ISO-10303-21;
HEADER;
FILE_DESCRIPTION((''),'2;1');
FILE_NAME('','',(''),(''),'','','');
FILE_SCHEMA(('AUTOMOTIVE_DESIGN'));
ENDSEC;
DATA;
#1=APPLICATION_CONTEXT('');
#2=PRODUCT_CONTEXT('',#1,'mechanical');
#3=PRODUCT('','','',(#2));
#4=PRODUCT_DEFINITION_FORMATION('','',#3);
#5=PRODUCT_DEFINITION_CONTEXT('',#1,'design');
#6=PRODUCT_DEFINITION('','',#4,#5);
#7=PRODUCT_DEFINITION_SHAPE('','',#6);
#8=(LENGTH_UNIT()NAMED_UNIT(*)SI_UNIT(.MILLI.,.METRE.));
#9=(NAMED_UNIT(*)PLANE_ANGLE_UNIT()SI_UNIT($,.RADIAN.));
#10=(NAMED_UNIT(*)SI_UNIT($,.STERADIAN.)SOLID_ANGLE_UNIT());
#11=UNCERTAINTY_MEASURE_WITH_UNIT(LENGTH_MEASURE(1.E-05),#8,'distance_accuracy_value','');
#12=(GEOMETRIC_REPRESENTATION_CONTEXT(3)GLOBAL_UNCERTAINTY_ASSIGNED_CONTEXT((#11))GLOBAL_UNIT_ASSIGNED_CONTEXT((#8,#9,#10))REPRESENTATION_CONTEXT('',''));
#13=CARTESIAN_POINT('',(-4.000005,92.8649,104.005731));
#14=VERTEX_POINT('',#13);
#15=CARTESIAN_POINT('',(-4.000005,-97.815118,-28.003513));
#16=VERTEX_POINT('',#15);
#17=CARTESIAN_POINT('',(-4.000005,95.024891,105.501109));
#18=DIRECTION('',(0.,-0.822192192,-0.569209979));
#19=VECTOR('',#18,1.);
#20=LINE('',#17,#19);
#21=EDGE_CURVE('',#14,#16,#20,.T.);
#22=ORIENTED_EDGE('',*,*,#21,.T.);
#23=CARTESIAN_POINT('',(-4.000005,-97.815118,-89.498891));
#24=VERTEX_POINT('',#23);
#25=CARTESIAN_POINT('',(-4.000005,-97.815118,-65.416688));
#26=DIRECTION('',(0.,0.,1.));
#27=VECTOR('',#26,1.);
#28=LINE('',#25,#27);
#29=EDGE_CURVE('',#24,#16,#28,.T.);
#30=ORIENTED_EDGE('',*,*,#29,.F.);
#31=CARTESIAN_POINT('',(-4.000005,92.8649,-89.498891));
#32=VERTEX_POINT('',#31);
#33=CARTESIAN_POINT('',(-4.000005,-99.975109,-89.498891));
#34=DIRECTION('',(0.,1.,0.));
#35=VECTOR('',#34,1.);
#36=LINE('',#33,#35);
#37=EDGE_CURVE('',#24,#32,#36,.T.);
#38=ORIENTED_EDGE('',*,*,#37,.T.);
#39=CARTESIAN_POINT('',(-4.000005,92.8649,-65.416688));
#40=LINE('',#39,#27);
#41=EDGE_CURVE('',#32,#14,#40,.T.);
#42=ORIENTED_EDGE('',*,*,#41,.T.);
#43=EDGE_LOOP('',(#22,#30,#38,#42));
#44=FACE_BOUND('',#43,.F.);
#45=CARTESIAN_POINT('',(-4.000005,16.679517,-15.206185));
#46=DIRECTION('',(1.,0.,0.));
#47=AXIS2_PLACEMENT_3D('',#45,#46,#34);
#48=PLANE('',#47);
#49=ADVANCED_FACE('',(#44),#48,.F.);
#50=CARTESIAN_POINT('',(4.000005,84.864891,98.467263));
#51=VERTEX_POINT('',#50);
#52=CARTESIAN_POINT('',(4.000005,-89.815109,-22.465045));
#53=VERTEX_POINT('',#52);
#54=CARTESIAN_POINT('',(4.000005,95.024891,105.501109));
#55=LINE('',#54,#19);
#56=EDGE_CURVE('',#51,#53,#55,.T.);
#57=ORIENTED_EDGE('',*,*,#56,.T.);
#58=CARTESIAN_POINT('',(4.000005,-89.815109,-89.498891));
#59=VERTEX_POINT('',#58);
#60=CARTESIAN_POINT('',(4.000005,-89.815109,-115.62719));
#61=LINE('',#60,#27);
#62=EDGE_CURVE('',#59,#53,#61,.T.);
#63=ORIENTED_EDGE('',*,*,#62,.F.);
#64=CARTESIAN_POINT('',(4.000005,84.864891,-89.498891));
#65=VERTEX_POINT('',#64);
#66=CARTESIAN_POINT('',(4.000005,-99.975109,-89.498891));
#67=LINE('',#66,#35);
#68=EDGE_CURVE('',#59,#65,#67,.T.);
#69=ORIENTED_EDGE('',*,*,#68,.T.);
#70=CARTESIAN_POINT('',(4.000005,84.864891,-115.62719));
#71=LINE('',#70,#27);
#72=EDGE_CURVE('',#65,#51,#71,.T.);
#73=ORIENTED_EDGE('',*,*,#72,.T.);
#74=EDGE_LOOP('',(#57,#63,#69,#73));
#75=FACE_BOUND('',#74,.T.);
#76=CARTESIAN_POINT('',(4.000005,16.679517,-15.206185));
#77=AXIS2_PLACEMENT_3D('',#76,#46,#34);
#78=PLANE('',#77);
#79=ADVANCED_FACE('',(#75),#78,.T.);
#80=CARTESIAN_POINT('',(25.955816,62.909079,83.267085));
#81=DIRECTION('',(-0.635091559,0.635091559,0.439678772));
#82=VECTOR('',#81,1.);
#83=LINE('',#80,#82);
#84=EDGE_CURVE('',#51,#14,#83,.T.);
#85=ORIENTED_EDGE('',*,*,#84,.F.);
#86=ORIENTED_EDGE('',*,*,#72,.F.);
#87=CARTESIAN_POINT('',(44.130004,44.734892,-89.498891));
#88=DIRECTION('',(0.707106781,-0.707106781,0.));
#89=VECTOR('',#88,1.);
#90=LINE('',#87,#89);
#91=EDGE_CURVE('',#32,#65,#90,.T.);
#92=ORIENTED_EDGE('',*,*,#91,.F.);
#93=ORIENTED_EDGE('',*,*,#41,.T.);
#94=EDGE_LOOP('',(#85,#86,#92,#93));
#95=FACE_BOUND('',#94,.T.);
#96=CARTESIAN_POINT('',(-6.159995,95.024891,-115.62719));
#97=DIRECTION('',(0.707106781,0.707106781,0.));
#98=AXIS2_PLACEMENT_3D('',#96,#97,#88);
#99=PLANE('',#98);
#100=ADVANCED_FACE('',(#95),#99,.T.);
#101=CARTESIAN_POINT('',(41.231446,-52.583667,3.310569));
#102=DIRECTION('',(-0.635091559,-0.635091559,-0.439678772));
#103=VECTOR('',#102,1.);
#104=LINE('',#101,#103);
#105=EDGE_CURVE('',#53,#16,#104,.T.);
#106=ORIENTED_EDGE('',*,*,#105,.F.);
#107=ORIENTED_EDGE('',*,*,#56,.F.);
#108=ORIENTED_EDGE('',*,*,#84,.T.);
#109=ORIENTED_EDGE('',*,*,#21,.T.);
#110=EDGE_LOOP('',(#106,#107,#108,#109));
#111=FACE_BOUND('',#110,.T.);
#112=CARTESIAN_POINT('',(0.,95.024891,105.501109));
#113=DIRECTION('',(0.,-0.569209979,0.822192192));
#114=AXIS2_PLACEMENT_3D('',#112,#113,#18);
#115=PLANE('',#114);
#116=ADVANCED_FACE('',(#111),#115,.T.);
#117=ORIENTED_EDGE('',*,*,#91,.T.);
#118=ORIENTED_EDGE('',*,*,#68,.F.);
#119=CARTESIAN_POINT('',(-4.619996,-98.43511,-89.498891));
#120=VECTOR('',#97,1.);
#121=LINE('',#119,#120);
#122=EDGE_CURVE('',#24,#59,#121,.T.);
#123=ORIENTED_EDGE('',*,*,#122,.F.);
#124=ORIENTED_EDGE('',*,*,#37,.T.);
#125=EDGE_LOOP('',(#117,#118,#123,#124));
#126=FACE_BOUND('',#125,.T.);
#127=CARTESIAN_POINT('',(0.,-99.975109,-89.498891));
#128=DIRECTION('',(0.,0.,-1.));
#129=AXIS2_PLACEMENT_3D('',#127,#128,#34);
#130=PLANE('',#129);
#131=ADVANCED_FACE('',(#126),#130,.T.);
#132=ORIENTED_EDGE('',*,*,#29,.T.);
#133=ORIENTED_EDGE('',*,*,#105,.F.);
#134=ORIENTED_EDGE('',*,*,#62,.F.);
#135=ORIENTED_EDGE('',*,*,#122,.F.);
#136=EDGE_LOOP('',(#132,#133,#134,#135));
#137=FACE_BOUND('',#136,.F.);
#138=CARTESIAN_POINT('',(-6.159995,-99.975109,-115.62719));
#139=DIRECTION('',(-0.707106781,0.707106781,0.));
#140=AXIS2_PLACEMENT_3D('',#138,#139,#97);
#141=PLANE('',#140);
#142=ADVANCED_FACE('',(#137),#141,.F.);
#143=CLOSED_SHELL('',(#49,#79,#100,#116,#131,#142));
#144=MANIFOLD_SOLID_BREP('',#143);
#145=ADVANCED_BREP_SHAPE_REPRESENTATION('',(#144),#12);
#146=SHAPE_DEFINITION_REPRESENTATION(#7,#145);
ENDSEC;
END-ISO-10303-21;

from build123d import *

# Parameters (mm, degrees)
F1_DEPTH    = 4.0000047
F2_T1_DEPTH = 112.2565983155
F3_T1_DEPTH = 247.2565983155


# Not quite as in the source:
# - a fillet or chamfer that OpenCascade refuses, or shapes differently, is made with other operations: its cross-section is extruded or revolved along the edge and cut away or added


with BuildPart() as f1:
    # F0 (on Right) → F1 (new body, symmetric)
    with BuildSketch(Plane.YZ):
        Polygon((-99.9751089393, -29.498891169), (-99.9751089393, -89.4988911689), (95.0248910607, -89.4988911689), (95.0248910607, 105.5011088311), align=None)
    extrude(amount=F1_DEPTH, both=True)

    # F2: chamfer of 10.16 on 1 edges, made by hand

    # F2_s2 → F2_t1 (cut)
    with BuildSketch(Plane.XY.offset(-115.6271903267)):
        Polygon((-6.1599953, -99.9751089393), (4.0000047, -89.8151089393), (4.0000047, -99.9751089393), align=None)
    extrude(amount=F2_T1_DEPTH, mode=Mode.SUBTRACT)

    # F3: chamfer of 10.16 on 1 edges, made by hand

    # F3_s2 → F3_t1 (cut)
    with BuildSketch(Plane.XY.offset(-115.6271903267)):
        Polygon((-6.1599953, 95.0248910607), (4.0000047, 84.8648910607), (4.0000047, 95.0248910607), align=None)
    extrude(amount=F3_T1_DEPTH, mode=Mode.SUBTRACT)


solid = f1.part
